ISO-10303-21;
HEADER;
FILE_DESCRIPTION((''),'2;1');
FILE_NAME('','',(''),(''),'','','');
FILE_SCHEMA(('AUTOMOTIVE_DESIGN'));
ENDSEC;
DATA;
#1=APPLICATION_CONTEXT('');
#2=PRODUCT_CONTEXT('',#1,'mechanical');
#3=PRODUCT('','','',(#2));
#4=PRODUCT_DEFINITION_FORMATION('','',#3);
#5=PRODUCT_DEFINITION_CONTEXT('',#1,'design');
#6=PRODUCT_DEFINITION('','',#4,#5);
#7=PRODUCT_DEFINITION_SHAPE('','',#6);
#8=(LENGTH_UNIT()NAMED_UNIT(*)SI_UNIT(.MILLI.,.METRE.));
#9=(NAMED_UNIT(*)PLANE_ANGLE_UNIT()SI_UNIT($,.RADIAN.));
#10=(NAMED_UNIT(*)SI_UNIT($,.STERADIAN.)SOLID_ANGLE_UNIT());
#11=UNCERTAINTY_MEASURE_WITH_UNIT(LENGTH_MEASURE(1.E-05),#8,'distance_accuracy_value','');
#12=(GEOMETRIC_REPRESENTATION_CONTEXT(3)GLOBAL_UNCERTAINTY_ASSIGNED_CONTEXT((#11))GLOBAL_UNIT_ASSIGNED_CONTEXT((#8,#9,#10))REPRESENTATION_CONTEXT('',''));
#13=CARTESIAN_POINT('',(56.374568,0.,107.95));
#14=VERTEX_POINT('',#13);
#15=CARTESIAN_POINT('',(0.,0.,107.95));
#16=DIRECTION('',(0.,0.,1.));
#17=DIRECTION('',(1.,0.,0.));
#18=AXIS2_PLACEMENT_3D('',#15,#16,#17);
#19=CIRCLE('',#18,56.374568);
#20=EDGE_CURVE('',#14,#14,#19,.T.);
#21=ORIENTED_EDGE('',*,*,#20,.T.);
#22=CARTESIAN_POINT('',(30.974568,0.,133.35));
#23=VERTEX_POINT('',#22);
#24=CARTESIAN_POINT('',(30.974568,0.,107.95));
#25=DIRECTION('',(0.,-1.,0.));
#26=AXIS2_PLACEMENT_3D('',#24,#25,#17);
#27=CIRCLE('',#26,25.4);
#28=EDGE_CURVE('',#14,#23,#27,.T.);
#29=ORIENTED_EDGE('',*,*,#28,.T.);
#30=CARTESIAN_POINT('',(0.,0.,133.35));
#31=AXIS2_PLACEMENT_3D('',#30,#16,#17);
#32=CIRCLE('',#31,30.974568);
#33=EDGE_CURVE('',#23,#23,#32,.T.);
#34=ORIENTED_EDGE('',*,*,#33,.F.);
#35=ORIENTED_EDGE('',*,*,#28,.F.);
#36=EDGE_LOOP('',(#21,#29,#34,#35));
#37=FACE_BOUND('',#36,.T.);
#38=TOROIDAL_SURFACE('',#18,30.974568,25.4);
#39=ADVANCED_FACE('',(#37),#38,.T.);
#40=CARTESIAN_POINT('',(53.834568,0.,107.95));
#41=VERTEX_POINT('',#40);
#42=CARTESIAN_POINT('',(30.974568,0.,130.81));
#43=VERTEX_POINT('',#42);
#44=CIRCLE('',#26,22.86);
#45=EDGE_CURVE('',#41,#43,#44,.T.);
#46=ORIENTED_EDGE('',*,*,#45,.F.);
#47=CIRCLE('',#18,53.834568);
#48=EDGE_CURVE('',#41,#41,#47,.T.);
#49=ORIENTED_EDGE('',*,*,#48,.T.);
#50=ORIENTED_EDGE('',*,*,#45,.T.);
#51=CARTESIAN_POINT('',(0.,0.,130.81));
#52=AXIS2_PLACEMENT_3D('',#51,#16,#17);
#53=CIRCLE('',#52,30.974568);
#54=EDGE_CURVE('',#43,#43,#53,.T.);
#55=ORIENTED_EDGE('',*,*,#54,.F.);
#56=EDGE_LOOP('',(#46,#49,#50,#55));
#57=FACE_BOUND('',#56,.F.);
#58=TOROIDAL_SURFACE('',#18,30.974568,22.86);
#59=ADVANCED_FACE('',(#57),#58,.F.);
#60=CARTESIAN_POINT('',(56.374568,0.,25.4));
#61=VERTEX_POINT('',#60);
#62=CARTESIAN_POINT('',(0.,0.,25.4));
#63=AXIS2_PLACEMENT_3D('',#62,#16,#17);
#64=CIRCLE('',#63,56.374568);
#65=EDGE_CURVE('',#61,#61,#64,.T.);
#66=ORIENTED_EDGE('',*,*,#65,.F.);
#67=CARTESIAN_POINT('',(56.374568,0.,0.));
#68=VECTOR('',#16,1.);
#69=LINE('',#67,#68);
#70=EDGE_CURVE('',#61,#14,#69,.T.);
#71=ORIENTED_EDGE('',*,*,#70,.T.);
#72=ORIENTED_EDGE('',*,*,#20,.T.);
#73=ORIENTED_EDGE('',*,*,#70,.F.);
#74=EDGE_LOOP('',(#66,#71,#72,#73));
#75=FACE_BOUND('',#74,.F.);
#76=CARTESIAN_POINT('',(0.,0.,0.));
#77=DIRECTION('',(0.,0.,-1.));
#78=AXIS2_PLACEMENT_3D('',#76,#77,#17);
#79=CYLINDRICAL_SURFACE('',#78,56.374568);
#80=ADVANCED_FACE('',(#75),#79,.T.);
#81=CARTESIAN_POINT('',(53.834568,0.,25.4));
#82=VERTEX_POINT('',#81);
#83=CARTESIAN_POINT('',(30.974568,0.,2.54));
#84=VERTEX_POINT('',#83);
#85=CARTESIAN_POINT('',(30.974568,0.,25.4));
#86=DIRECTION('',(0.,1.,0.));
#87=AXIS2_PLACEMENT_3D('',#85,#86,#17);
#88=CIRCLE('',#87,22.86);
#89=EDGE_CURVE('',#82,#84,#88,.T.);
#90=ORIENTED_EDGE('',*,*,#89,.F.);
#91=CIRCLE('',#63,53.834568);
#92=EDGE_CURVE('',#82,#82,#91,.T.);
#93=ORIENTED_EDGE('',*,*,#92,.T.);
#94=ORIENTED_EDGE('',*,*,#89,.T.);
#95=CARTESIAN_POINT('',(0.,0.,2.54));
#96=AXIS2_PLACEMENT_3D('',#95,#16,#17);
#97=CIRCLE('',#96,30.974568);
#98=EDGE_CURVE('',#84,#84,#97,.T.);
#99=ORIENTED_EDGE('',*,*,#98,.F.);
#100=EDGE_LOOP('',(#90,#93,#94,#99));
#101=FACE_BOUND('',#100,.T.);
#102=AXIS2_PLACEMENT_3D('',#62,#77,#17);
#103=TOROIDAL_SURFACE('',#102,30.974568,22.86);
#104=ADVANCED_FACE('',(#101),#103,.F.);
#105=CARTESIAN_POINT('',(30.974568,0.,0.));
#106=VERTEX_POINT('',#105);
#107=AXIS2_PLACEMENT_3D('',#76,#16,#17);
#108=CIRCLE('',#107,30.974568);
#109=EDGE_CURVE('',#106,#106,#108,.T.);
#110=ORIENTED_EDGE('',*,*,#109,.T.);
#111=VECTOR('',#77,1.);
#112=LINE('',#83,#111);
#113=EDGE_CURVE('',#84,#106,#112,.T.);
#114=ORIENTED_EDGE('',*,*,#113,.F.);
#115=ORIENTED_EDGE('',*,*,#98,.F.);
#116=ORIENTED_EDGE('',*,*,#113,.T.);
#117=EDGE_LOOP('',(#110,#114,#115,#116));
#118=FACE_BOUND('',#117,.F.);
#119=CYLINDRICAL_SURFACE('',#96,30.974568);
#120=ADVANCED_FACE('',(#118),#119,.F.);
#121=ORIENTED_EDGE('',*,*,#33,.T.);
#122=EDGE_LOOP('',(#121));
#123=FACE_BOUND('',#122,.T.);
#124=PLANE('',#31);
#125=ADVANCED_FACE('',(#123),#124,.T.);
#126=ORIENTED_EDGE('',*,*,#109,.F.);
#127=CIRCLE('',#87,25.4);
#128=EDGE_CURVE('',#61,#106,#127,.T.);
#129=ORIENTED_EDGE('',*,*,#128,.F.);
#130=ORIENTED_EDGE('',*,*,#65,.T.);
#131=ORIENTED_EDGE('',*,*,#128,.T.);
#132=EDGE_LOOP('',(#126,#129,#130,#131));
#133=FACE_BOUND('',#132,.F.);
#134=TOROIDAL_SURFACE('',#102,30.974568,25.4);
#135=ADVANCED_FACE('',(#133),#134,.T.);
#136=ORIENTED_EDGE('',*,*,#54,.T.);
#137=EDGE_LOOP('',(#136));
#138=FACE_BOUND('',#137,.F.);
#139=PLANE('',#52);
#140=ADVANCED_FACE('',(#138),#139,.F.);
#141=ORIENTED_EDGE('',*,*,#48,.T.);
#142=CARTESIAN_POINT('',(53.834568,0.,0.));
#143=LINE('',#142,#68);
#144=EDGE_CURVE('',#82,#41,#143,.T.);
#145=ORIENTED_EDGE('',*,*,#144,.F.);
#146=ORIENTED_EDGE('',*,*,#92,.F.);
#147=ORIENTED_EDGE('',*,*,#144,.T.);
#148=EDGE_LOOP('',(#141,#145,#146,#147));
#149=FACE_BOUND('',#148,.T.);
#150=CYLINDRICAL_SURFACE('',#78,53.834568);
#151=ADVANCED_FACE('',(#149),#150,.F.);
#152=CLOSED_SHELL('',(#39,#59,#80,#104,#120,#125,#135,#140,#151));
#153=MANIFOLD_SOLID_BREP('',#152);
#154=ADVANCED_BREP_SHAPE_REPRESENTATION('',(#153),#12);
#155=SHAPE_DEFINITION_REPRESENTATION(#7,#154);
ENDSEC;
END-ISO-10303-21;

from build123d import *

# Parameters (mm, degrees)
F0_R     = 56.3745675483
F1_DEPTH = 133.35
F2_R     = 25.4
F3_R     = 25.4
F4_T     = -2.54


# Not quite as in the source:
# - a shell that OpenCascade refuses in one call is made with other operations: the cavity is built on its own and cut out


with BuildPart() as f1:
    # F0 (on Top) → F1 (new body)
    with BuildSketch(Plane.XY):
        Circle(F0_R)
    extrude(amount=F1_DEPTH)

    # F2
    f2_edges = [f1.edges().sort_by_distance(p)[0] for p in [
        (-56.374568, 0, 133.35),
    ]]
    fillet(f2_edges, radius=F2_R)

    # F3
    f3_edges = [f1.edges().sort_by_distance(p)[0] for p in [
        (-56.374568, 0, 0),
    ]]
    fillet(f3_edges, radius=F3_R)

    # F4: a shell. OpenCascade refuses it in one call, so the cavity is built on its own and cut out:
    # the body offset inwards by the wall thickness, plus a prism from it out through each open face.
    f4_core = offset(f1.part, amount=F4_T, mode=Mode.PRIVATE)
    f4_exits = [f4_core.faces().sort_by_distance(p)[0] for p in [
        (0, 0, 2.54),
    ]]
    add(f4_core, mode=Mode.SUBTRACT)
    extrude(f4_exits, amount=-F4_T, mode=Mode.SUBTRACT)


solid = f1.part
